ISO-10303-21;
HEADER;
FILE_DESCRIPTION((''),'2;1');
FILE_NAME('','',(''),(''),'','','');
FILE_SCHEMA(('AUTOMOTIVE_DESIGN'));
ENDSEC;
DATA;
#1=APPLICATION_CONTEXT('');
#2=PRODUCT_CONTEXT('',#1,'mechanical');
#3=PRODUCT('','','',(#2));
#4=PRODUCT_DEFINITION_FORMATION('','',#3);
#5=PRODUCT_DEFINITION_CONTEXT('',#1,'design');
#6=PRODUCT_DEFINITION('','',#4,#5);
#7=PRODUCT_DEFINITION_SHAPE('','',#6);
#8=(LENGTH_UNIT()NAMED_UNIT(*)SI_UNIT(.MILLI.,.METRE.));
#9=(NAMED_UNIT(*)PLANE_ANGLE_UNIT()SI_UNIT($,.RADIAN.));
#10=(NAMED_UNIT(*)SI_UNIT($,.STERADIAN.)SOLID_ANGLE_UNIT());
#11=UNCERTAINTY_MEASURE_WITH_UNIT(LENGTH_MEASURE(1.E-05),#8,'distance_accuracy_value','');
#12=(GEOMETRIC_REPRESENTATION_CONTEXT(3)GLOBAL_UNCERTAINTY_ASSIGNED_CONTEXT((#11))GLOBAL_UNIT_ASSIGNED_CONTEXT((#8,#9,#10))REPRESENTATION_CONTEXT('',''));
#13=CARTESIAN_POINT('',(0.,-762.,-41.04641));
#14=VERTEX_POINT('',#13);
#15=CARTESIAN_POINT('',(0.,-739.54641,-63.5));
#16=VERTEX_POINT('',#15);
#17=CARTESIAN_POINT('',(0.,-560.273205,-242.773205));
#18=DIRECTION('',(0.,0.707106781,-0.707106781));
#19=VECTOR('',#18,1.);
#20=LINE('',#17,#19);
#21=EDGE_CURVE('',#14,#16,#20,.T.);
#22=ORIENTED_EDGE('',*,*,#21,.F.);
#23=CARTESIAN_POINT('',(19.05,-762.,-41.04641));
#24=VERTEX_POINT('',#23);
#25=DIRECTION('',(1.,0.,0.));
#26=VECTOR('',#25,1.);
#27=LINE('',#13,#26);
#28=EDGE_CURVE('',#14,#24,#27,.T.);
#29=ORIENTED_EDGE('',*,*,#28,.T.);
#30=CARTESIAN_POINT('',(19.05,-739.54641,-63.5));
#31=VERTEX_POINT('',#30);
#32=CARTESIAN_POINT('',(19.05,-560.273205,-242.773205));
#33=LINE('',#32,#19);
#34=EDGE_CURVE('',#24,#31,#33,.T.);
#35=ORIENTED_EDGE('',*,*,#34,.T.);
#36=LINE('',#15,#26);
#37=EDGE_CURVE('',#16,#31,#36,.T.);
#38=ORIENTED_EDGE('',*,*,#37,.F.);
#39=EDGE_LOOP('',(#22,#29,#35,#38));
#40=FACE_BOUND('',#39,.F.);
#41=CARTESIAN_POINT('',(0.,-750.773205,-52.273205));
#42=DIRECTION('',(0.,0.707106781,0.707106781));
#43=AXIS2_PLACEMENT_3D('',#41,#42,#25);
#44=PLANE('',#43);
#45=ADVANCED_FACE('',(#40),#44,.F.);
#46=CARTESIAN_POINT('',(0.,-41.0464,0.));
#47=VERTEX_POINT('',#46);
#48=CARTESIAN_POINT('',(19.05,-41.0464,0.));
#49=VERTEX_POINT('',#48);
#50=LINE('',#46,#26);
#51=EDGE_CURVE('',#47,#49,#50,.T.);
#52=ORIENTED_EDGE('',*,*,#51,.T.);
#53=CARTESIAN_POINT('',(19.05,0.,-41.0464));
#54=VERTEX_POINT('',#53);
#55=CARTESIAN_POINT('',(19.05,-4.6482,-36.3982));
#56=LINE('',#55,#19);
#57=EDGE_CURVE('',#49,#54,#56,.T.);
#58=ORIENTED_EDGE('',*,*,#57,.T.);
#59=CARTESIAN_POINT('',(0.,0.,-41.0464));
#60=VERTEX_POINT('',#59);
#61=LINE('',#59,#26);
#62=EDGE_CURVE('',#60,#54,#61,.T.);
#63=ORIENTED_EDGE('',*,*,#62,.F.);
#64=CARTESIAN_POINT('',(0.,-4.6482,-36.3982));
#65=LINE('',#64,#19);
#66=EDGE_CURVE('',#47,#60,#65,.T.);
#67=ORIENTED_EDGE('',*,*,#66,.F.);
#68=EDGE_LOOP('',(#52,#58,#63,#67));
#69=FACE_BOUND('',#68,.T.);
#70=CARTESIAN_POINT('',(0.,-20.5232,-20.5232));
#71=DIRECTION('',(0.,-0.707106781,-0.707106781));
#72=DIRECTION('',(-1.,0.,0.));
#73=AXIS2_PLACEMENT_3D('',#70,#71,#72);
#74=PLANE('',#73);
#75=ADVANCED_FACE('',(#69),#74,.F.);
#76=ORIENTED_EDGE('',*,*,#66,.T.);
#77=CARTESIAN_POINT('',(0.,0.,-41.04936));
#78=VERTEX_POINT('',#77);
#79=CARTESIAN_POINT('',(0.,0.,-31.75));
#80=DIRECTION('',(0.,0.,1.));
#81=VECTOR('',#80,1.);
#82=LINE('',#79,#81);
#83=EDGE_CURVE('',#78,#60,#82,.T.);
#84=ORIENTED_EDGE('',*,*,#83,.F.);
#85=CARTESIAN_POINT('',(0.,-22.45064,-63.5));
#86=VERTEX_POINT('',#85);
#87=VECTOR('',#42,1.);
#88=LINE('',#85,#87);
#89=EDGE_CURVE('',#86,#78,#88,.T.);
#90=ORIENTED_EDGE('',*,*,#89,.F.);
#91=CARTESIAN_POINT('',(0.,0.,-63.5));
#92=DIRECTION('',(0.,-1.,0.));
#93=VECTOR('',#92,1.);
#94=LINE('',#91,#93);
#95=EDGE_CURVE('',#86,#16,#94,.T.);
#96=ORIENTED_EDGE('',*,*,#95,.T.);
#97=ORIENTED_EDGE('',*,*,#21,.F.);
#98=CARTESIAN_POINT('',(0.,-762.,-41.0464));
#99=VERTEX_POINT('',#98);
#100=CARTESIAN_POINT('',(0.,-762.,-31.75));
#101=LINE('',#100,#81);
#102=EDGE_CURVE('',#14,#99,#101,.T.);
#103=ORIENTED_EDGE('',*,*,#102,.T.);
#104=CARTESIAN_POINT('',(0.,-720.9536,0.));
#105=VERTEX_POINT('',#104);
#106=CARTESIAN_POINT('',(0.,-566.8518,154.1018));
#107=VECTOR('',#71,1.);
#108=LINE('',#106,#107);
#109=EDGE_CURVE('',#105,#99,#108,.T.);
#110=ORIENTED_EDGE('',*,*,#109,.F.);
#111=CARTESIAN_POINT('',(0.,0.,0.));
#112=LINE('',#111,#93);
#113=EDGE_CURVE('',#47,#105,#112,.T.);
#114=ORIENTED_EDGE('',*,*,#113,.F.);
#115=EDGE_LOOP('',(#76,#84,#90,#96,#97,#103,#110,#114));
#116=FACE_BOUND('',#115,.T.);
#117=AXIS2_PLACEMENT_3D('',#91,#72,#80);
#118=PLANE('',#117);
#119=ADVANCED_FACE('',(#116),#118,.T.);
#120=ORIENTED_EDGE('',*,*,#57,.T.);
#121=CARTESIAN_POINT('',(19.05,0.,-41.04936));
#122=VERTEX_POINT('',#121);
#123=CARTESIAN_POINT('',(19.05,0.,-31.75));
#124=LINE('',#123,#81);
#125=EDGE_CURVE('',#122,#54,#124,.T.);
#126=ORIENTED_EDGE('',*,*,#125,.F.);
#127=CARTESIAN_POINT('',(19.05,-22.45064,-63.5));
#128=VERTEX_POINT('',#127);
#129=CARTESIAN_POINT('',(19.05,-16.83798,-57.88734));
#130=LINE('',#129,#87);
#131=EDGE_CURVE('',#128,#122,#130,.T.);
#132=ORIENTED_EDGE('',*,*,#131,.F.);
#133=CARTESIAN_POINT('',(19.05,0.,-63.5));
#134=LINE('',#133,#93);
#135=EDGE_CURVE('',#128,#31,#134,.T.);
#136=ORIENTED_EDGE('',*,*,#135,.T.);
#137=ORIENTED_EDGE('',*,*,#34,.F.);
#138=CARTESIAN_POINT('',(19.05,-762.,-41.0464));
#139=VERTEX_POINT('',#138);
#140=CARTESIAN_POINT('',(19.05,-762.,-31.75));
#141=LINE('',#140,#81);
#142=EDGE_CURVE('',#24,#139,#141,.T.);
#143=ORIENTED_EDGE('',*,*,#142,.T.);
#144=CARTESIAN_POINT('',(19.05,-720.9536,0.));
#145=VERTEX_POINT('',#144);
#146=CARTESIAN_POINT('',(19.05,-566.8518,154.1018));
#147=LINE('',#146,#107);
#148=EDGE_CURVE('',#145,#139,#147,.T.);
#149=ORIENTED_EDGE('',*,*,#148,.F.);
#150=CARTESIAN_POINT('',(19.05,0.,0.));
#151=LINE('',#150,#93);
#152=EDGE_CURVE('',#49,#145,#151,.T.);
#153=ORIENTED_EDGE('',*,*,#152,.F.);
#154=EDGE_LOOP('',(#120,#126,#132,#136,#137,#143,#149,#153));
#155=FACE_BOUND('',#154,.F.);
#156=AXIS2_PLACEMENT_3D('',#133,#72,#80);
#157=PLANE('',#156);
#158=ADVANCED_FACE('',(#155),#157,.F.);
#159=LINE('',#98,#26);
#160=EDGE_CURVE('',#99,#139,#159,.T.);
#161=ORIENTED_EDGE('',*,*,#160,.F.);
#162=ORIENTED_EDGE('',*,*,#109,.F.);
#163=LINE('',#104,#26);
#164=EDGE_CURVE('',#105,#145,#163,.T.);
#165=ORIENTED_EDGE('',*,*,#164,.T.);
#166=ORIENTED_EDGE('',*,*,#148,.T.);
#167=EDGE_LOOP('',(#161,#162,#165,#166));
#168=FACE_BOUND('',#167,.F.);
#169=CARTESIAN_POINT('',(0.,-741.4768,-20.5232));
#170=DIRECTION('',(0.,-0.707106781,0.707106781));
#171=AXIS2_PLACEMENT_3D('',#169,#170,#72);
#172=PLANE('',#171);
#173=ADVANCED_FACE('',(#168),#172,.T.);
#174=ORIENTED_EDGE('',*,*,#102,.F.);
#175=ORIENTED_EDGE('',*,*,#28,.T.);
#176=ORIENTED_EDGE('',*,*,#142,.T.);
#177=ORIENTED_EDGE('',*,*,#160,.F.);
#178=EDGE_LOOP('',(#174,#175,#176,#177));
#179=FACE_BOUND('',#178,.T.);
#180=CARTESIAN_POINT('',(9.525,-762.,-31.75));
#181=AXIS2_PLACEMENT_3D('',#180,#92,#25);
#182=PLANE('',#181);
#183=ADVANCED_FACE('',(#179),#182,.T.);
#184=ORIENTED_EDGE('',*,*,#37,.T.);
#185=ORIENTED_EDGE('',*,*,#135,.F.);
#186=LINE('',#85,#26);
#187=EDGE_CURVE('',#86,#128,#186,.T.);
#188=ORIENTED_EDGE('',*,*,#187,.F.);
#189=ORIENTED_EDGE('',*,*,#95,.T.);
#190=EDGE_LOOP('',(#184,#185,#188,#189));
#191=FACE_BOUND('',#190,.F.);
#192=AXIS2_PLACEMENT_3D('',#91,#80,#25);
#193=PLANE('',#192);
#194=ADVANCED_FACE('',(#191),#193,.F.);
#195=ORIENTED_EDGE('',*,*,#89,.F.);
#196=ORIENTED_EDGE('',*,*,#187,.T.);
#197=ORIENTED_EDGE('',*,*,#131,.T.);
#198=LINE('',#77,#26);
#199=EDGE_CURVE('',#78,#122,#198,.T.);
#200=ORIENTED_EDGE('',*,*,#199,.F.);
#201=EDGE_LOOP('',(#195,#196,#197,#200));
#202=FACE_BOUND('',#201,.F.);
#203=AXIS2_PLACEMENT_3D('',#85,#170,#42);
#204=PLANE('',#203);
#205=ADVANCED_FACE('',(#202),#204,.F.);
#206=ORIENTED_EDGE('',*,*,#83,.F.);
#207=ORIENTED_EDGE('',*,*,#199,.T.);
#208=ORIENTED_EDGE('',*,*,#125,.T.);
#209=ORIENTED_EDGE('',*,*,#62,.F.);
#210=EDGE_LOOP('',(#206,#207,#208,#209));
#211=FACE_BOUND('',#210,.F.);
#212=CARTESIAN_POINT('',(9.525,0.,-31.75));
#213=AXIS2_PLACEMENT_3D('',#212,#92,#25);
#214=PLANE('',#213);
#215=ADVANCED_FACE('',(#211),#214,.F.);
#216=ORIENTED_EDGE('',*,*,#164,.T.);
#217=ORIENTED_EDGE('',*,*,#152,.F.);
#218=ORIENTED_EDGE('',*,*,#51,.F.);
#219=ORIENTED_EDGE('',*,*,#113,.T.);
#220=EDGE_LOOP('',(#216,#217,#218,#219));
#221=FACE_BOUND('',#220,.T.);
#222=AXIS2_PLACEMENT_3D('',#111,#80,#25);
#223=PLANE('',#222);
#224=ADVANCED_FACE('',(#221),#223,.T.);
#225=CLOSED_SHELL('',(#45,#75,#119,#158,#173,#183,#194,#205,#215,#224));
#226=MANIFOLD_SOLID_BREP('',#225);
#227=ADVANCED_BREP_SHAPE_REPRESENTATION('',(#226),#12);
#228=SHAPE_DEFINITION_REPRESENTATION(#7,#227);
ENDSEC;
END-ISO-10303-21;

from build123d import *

# Parameters (mm, degrees)
F0_W     = 19.05
F0_H     = 63.5
F1_DEPTH = 762
F2_SIZE  = 41.0464
F7_DEPTH = 19.051
F8_SIZE  = 22.45359


# Not quite as in the source:
# - a fillet or chamfer is up to 0.001 mm smaller than in the source, because OpenCascade refuses the exact size


with BuildPart() as f1:
    # F0 (on Front) → F1 (new body)
    with BuildSketch(Plane.XZ):
        with Locations((9.525, -31.75)):
            Rectangle(F0_W, F0_H)
    extrude(amount=F1_DEPTH)

    # F2
    f2_edges = [f1.edges().sort_by_distance(p)[0] for p in [
        (9.525, 0, 0),
        (9.525, -762, 0),
    ]]
    chamfer(f2_edges, length=F2_SIZE)

    # F6 (on face) → F7 (cut, through all)
    with BuildSketch(Plane(origin=(0, 0, 0), x_dir=(0, -1, 0), z_dir=(-1, 0, 0))):
        Polygon((0, -41.0493596973), (0, -63.5), (22.4506403027, -63.5), align=None)
    extrude(amount=-F7_DEPTH, mode=Mode.SUBTRACT)

    # F8 (size 22.4536 in the source; OpenCascade refuses exactly that, so slightly less here)
    f8_edges = [f1.edges().sort_by_distance(p)[0] for p in [
        (9.525, -762, -63.5),
    ]]
    chamfer(f8_edges, length=F8_SIZE)


solid = f1.part
